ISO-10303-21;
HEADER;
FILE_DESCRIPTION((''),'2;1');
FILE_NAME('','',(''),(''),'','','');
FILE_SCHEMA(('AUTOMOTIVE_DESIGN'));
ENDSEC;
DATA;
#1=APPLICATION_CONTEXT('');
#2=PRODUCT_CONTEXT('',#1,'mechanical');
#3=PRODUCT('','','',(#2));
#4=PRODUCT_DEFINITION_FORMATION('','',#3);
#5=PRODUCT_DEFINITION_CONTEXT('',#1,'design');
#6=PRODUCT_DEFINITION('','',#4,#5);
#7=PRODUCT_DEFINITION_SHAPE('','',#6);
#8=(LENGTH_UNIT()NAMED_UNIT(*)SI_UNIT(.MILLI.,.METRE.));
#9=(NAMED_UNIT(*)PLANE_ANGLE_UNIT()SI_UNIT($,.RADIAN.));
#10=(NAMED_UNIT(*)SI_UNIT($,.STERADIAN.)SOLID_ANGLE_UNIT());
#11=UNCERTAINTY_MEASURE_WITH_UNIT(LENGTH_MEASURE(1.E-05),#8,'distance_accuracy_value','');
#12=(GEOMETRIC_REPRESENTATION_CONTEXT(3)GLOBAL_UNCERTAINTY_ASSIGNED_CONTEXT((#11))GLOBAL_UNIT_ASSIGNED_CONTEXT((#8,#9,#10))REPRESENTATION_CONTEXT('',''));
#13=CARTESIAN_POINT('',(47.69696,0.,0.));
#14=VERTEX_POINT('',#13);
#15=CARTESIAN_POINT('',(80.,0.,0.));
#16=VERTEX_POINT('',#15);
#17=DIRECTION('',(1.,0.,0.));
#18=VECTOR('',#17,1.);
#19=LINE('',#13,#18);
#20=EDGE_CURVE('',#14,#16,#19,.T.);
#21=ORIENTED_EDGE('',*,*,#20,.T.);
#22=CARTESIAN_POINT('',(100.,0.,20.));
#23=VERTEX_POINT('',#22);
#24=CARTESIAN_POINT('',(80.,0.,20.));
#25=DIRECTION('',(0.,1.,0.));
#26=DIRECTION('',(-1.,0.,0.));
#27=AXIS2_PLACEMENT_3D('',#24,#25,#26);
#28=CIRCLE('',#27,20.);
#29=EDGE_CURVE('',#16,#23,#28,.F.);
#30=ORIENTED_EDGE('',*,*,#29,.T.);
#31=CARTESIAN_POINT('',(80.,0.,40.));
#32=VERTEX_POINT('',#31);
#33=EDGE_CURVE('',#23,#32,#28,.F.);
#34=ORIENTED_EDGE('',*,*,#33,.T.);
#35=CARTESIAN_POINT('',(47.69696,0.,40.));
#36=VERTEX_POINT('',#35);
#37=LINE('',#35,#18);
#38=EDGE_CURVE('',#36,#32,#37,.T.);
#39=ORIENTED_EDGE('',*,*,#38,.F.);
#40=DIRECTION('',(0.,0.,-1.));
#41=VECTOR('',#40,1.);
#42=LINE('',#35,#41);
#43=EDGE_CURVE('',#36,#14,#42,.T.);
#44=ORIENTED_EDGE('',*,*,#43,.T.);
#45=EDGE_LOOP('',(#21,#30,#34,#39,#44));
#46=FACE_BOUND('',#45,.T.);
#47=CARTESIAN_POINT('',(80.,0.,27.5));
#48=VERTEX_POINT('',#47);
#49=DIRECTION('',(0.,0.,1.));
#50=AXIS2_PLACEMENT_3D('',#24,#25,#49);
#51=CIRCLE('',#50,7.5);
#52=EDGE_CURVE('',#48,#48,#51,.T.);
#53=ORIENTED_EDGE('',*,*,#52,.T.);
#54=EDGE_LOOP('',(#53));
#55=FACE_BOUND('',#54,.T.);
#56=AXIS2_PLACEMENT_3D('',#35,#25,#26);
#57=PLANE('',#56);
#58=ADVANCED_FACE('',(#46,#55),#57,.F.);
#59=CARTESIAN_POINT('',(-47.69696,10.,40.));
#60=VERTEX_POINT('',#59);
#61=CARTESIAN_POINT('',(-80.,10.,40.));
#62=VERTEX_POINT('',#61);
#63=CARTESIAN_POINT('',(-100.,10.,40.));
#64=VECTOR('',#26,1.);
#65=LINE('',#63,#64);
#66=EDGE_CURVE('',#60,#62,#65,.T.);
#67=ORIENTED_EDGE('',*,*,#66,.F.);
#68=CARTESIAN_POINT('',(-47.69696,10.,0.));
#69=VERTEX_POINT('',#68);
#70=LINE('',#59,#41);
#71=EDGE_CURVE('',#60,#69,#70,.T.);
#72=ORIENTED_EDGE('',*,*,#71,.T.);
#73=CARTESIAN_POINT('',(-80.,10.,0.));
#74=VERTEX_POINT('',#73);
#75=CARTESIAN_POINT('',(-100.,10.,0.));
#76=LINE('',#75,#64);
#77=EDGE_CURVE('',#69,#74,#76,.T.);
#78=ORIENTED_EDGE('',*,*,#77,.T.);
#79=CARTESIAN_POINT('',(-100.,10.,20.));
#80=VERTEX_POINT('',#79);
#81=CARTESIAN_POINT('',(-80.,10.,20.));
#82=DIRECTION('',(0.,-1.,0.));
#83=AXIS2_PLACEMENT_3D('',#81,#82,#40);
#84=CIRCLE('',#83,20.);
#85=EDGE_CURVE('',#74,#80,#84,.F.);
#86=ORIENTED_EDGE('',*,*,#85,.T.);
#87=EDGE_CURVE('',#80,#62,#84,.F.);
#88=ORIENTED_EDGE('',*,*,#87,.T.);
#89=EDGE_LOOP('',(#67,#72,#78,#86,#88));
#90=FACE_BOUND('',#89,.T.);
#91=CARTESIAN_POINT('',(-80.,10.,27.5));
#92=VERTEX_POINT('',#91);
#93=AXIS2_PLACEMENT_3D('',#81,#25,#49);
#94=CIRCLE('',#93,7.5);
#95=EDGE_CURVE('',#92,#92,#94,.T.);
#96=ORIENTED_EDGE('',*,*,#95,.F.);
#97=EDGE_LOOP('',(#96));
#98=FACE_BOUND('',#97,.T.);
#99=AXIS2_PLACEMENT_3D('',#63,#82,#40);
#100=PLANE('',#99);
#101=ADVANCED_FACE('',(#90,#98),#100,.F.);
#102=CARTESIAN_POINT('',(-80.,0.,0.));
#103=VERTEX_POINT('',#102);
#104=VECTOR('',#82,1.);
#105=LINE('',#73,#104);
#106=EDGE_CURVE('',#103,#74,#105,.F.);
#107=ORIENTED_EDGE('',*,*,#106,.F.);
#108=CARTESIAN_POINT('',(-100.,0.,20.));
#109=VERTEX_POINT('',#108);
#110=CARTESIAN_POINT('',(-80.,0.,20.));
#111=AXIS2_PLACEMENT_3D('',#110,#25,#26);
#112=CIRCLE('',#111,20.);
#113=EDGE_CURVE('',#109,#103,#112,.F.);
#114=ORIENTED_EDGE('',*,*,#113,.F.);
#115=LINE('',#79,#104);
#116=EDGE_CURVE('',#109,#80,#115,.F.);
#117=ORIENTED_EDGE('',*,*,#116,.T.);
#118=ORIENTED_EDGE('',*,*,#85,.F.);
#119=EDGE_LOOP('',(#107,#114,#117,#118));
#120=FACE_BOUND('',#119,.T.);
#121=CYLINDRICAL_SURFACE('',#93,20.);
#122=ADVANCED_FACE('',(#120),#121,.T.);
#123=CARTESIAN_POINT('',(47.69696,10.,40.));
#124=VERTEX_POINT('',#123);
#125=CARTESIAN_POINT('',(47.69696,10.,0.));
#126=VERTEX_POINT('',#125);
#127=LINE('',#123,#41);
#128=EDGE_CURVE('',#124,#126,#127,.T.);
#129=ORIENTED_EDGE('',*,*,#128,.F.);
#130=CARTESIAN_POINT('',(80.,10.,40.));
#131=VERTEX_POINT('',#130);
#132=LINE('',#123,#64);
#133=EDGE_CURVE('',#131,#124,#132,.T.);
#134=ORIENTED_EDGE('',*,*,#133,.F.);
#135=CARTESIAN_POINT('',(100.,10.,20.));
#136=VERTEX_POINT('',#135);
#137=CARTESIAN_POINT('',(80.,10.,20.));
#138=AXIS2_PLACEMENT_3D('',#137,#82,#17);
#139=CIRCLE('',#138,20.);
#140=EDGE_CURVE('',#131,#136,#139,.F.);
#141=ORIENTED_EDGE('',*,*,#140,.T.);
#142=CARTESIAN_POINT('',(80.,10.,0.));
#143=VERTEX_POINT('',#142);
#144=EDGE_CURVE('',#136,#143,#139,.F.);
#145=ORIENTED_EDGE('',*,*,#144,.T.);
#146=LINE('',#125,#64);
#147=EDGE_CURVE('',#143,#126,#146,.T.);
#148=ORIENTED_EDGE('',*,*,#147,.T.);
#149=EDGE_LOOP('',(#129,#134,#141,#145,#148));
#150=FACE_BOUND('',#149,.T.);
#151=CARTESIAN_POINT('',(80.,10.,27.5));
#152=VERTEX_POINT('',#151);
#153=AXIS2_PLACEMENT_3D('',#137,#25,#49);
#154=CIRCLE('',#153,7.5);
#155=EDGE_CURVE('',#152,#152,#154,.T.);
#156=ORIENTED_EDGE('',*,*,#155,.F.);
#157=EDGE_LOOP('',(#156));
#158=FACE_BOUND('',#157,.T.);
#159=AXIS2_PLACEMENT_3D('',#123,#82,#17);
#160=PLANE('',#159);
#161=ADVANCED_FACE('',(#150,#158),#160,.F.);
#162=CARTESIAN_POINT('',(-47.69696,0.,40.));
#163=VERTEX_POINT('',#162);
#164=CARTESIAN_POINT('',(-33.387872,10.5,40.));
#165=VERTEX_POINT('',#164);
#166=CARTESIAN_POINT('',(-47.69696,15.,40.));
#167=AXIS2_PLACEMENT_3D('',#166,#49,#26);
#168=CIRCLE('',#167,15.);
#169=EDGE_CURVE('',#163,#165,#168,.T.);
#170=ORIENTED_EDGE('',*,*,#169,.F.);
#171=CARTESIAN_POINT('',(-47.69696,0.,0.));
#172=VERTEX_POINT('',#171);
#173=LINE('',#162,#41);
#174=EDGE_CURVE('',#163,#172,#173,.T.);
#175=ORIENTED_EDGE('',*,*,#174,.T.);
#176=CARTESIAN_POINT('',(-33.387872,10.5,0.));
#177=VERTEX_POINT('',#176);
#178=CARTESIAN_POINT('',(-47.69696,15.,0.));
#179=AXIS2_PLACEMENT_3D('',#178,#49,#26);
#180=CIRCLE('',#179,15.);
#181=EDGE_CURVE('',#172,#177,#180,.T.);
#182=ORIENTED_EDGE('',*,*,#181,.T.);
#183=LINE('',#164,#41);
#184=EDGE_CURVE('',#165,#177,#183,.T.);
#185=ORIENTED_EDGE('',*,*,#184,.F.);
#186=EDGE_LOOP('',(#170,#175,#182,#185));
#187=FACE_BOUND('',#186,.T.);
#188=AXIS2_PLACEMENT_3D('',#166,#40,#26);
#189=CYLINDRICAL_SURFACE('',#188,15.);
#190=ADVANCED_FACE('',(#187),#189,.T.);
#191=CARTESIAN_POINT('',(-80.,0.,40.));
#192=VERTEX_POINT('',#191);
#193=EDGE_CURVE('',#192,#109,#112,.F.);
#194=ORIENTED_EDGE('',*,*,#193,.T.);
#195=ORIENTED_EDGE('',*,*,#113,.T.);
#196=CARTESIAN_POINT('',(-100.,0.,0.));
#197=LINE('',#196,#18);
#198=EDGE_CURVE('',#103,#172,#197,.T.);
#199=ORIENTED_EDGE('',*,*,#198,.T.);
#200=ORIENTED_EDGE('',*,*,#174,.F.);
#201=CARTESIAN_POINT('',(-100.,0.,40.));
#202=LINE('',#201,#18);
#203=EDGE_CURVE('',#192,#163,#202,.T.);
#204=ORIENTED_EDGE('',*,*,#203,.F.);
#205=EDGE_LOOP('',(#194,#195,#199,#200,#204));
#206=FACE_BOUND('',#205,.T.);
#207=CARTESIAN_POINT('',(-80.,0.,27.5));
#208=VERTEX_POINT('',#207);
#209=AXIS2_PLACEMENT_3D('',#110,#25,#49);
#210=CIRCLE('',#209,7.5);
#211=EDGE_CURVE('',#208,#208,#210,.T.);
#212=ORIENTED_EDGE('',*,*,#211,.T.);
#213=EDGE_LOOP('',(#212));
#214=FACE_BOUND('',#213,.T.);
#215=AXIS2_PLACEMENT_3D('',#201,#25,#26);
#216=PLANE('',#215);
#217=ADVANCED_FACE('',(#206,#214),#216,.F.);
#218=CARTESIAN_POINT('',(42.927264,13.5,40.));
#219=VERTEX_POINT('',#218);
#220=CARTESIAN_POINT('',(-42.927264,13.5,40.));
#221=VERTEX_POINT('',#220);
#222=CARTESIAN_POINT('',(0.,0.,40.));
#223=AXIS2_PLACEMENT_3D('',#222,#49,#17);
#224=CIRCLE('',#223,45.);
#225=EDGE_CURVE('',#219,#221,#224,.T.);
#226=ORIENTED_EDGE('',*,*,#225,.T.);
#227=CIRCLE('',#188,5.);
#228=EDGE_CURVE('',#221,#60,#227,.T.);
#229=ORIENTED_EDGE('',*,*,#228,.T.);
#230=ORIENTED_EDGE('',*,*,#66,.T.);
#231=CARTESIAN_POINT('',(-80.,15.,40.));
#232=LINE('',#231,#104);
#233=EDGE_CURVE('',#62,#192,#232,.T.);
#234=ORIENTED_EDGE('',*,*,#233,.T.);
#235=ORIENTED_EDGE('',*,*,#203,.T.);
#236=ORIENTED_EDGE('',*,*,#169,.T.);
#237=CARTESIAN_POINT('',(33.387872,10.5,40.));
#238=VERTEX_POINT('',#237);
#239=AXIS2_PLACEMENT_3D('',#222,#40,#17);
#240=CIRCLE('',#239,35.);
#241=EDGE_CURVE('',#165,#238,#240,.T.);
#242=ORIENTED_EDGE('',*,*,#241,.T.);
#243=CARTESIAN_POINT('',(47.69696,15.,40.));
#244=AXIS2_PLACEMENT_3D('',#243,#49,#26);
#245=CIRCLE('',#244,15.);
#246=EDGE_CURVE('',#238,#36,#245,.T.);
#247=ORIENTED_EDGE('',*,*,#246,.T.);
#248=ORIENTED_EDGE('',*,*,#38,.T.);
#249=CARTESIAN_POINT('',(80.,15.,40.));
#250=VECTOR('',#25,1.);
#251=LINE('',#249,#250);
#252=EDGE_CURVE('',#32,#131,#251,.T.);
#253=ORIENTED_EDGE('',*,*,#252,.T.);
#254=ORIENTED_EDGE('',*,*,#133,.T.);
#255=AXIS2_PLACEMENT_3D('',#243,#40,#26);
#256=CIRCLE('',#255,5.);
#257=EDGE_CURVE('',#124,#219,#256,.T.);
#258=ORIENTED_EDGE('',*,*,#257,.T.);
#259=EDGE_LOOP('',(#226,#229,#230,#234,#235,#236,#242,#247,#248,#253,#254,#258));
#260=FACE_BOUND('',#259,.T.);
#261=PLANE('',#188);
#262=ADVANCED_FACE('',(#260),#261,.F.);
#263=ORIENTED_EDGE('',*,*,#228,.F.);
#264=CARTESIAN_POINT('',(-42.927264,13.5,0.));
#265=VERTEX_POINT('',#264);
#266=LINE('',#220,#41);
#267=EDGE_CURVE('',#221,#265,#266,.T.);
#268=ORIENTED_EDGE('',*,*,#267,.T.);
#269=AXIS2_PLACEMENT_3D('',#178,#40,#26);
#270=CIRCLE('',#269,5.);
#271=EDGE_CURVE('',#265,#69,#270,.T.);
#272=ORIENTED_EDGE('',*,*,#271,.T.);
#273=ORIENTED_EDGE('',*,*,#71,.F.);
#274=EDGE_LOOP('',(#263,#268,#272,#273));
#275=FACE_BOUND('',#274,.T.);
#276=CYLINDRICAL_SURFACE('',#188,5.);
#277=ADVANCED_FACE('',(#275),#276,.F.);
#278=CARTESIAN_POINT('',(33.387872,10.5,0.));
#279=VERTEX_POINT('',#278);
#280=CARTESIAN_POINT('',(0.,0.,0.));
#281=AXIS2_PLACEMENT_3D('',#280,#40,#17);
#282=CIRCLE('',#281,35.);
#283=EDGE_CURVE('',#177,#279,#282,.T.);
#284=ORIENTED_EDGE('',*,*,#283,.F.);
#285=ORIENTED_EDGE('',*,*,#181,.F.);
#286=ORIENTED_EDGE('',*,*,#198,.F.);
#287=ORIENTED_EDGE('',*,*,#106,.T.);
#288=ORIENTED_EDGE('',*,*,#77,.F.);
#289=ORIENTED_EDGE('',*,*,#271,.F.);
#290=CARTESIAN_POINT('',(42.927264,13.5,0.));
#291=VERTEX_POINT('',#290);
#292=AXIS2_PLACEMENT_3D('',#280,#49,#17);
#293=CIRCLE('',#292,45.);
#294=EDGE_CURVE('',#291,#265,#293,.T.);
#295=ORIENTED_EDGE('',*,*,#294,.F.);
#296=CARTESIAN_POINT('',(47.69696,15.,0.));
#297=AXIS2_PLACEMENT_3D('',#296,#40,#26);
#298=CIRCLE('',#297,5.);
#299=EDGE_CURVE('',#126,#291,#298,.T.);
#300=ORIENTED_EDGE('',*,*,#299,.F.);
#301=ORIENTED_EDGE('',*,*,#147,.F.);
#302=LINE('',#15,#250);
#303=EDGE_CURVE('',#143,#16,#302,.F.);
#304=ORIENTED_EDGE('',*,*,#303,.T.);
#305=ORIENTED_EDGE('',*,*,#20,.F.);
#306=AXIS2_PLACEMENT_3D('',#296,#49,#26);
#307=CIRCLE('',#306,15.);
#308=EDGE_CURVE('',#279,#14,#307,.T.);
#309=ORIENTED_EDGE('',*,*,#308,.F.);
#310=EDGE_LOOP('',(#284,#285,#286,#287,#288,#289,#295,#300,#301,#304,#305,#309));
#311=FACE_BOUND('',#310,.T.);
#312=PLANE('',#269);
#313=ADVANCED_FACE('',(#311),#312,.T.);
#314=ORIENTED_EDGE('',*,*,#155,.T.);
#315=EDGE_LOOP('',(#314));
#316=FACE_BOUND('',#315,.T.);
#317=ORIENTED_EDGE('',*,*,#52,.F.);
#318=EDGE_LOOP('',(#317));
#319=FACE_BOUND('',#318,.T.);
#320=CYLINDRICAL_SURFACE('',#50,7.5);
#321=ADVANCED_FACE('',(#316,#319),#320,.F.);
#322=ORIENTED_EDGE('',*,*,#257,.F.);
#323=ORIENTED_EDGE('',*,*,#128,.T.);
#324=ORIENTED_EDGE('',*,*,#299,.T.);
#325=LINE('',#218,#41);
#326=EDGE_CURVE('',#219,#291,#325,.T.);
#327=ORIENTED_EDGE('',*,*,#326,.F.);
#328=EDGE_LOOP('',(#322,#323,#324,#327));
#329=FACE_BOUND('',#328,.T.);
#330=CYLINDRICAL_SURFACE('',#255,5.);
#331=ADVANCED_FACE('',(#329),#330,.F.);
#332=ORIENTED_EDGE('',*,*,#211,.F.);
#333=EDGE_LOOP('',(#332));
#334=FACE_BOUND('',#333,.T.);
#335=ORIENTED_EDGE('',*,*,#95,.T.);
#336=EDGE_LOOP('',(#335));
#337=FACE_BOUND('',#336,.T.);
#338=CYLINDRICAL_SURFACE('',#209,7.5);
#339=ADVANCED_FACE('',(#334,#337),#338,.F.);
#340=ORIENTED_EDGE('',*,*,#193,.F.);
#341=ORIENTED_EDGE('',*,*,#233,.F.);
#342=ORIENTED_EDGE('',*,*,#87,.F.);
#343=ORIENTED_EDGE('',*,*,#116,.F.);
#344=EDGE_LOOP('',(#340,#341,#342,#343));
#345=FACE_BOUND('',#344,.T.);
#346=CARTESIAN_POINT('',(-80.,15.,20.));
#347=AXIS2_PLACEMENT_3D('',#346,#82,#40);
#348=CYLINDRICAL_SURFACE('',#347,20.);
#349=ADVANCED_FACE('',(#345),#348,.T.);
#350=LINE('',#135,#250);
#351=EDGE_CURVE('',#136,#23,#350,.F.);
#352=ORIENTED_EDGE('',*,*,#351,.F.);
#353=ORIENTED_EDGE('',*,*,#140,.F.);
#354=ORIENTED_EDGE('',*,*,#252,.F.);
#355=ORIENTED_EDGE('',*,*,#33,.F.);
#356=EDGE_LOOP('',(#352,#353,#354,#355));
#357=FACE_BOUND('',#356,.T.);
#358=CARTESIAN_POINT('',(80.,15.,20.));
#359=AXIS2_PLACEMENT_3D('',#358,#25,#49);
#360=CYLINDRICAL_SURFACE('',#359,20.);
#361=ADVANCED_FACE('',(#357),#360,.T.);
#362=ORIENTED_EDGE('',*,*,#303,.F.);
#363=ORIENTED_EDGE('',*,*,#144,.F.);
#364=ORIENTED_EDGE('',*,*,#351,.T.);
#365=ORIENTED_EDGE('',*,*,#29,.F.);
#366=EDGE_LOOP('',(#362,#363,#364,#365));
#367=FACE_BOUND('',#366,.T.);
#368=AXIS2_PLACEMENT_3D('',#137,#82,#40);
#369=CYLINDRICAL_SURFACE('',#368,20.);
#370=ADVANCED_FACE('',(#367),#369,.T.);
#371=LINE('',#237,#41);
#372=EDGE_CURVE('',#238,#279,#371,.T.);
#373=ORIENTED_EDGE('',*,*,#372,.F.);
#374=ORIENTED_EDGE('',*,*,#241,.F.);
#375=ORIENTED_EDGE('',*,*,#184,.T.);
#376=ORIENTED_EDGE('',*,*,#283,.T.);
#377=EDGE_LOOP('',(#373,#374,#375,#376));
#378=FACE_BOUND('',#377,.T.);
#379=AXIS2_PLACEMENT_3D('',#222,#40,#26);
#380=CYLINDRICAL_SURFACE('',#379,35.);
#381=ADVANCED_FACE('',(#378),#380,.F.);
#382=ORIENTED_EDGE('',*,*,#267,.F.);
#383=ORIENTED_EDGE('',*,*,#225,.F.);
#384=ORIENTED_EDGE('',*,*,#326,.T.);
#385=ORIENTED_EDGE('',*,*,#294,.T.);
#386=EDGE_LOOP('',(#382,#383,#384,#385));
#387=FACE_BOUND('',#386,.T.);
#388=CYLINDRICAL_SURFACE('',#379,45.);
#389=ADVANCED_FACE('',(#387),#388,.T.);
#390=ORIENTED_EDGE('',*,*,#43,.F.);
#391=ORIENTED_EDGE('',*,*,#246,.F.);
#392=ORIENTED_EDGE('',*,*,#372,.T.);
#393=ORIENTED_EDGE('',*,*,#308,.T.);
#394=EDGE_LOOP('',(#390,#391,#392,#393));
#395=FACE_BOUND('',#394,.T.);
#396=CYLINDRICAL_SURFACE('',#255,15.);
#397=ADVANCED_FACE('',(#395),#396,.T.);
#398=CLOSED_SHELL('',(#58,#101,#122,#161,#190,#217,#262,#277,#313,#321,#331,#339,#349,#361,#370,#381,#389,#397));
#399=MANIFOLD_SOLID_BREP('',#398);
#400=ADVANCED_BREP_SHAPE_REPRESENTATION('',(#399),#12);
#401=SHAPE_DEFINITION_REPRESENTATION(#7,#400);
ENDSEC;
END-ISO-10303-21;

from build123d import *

# Parameters (mm, degrees)
BOSS_EXTRUDE1_DEPTH = 40
FILLET1_R           = 20
SKETCH2_R           = 7.5
CUT_EXTRUDE1_DEPTH  = 114.247516529


with BuildPart() as part:
    # Sketch1 → Boss-Extrude1 (new body)
    with BuildSketch(Plane.XY):
        with BuildLine():
            Line((-100, 0), (-47.696960071, 0))
            ThreePointArc((-47.696960071, 0), (-38.822840396, 2.906613378), (-33.38787205, 10.5))
            ThreePointArc((-33.38787205, 10.5), (0, 35), (33.38787205, 10.5))
            ThreePointArc((33.38787205, 10.5), (38.822840396, 2.906613378), (47.696960071, 0))
            Line((47.696960071, 0), (100, 0))
            Line((100, 0), (100, 10))
            Line((100, 10), (47.696960071, 10))
            ThreePointArc((47.696960071, 10), (44.738920179, 10.968871126), (42.927264064, 13.5))
            ThreePointArc((42.927264064, 13.5), (0, 45), (-42.927264064, 13.5))
            ThreePointArc((-42.927264064, 13.5), (-44.738920179, 10.968871126), (-47.696960071, 10))
            Line((-47.696960071, 10), (-100, 10))
            Line((-100, 10), (-100, 0))
        make_face()
    extrude(amount=BOSS_EXTRUDE1_DEPTH)

    # Fillet1
    fillet1_edges = [part.edges().sort_by_distance(p)[0] for p in [
        (100, 5, 0),
        (100, 5, 40),
        (-100, 5, 0),
        (-100, 5, 40),
    ]]
    fillet(fillet1_edges, radius=FILLET1_R - 0.0001)  # a hair under: the kernel refuses the full size

    # Sketch2 → Cut-Extrude1 (cut, through all)
    with BuildSketch(Plane(origin=(0, 10, 0), x_dir=(1, 0, 0), z_dir=(0, 1, 0))):
        with Locations(Location((-80, -20, 0), (0, 0, 270))):
            Circle(SKETCH2_R)
        with Locations(Location((80, -20, 0), (0, 0, 270))):
            Circle(SKETCH2_R)
    extrude(amount=-CUT_EXTRUDE1_DEPTH, mode=Mode.SUBTRACT)


solid = part.part
